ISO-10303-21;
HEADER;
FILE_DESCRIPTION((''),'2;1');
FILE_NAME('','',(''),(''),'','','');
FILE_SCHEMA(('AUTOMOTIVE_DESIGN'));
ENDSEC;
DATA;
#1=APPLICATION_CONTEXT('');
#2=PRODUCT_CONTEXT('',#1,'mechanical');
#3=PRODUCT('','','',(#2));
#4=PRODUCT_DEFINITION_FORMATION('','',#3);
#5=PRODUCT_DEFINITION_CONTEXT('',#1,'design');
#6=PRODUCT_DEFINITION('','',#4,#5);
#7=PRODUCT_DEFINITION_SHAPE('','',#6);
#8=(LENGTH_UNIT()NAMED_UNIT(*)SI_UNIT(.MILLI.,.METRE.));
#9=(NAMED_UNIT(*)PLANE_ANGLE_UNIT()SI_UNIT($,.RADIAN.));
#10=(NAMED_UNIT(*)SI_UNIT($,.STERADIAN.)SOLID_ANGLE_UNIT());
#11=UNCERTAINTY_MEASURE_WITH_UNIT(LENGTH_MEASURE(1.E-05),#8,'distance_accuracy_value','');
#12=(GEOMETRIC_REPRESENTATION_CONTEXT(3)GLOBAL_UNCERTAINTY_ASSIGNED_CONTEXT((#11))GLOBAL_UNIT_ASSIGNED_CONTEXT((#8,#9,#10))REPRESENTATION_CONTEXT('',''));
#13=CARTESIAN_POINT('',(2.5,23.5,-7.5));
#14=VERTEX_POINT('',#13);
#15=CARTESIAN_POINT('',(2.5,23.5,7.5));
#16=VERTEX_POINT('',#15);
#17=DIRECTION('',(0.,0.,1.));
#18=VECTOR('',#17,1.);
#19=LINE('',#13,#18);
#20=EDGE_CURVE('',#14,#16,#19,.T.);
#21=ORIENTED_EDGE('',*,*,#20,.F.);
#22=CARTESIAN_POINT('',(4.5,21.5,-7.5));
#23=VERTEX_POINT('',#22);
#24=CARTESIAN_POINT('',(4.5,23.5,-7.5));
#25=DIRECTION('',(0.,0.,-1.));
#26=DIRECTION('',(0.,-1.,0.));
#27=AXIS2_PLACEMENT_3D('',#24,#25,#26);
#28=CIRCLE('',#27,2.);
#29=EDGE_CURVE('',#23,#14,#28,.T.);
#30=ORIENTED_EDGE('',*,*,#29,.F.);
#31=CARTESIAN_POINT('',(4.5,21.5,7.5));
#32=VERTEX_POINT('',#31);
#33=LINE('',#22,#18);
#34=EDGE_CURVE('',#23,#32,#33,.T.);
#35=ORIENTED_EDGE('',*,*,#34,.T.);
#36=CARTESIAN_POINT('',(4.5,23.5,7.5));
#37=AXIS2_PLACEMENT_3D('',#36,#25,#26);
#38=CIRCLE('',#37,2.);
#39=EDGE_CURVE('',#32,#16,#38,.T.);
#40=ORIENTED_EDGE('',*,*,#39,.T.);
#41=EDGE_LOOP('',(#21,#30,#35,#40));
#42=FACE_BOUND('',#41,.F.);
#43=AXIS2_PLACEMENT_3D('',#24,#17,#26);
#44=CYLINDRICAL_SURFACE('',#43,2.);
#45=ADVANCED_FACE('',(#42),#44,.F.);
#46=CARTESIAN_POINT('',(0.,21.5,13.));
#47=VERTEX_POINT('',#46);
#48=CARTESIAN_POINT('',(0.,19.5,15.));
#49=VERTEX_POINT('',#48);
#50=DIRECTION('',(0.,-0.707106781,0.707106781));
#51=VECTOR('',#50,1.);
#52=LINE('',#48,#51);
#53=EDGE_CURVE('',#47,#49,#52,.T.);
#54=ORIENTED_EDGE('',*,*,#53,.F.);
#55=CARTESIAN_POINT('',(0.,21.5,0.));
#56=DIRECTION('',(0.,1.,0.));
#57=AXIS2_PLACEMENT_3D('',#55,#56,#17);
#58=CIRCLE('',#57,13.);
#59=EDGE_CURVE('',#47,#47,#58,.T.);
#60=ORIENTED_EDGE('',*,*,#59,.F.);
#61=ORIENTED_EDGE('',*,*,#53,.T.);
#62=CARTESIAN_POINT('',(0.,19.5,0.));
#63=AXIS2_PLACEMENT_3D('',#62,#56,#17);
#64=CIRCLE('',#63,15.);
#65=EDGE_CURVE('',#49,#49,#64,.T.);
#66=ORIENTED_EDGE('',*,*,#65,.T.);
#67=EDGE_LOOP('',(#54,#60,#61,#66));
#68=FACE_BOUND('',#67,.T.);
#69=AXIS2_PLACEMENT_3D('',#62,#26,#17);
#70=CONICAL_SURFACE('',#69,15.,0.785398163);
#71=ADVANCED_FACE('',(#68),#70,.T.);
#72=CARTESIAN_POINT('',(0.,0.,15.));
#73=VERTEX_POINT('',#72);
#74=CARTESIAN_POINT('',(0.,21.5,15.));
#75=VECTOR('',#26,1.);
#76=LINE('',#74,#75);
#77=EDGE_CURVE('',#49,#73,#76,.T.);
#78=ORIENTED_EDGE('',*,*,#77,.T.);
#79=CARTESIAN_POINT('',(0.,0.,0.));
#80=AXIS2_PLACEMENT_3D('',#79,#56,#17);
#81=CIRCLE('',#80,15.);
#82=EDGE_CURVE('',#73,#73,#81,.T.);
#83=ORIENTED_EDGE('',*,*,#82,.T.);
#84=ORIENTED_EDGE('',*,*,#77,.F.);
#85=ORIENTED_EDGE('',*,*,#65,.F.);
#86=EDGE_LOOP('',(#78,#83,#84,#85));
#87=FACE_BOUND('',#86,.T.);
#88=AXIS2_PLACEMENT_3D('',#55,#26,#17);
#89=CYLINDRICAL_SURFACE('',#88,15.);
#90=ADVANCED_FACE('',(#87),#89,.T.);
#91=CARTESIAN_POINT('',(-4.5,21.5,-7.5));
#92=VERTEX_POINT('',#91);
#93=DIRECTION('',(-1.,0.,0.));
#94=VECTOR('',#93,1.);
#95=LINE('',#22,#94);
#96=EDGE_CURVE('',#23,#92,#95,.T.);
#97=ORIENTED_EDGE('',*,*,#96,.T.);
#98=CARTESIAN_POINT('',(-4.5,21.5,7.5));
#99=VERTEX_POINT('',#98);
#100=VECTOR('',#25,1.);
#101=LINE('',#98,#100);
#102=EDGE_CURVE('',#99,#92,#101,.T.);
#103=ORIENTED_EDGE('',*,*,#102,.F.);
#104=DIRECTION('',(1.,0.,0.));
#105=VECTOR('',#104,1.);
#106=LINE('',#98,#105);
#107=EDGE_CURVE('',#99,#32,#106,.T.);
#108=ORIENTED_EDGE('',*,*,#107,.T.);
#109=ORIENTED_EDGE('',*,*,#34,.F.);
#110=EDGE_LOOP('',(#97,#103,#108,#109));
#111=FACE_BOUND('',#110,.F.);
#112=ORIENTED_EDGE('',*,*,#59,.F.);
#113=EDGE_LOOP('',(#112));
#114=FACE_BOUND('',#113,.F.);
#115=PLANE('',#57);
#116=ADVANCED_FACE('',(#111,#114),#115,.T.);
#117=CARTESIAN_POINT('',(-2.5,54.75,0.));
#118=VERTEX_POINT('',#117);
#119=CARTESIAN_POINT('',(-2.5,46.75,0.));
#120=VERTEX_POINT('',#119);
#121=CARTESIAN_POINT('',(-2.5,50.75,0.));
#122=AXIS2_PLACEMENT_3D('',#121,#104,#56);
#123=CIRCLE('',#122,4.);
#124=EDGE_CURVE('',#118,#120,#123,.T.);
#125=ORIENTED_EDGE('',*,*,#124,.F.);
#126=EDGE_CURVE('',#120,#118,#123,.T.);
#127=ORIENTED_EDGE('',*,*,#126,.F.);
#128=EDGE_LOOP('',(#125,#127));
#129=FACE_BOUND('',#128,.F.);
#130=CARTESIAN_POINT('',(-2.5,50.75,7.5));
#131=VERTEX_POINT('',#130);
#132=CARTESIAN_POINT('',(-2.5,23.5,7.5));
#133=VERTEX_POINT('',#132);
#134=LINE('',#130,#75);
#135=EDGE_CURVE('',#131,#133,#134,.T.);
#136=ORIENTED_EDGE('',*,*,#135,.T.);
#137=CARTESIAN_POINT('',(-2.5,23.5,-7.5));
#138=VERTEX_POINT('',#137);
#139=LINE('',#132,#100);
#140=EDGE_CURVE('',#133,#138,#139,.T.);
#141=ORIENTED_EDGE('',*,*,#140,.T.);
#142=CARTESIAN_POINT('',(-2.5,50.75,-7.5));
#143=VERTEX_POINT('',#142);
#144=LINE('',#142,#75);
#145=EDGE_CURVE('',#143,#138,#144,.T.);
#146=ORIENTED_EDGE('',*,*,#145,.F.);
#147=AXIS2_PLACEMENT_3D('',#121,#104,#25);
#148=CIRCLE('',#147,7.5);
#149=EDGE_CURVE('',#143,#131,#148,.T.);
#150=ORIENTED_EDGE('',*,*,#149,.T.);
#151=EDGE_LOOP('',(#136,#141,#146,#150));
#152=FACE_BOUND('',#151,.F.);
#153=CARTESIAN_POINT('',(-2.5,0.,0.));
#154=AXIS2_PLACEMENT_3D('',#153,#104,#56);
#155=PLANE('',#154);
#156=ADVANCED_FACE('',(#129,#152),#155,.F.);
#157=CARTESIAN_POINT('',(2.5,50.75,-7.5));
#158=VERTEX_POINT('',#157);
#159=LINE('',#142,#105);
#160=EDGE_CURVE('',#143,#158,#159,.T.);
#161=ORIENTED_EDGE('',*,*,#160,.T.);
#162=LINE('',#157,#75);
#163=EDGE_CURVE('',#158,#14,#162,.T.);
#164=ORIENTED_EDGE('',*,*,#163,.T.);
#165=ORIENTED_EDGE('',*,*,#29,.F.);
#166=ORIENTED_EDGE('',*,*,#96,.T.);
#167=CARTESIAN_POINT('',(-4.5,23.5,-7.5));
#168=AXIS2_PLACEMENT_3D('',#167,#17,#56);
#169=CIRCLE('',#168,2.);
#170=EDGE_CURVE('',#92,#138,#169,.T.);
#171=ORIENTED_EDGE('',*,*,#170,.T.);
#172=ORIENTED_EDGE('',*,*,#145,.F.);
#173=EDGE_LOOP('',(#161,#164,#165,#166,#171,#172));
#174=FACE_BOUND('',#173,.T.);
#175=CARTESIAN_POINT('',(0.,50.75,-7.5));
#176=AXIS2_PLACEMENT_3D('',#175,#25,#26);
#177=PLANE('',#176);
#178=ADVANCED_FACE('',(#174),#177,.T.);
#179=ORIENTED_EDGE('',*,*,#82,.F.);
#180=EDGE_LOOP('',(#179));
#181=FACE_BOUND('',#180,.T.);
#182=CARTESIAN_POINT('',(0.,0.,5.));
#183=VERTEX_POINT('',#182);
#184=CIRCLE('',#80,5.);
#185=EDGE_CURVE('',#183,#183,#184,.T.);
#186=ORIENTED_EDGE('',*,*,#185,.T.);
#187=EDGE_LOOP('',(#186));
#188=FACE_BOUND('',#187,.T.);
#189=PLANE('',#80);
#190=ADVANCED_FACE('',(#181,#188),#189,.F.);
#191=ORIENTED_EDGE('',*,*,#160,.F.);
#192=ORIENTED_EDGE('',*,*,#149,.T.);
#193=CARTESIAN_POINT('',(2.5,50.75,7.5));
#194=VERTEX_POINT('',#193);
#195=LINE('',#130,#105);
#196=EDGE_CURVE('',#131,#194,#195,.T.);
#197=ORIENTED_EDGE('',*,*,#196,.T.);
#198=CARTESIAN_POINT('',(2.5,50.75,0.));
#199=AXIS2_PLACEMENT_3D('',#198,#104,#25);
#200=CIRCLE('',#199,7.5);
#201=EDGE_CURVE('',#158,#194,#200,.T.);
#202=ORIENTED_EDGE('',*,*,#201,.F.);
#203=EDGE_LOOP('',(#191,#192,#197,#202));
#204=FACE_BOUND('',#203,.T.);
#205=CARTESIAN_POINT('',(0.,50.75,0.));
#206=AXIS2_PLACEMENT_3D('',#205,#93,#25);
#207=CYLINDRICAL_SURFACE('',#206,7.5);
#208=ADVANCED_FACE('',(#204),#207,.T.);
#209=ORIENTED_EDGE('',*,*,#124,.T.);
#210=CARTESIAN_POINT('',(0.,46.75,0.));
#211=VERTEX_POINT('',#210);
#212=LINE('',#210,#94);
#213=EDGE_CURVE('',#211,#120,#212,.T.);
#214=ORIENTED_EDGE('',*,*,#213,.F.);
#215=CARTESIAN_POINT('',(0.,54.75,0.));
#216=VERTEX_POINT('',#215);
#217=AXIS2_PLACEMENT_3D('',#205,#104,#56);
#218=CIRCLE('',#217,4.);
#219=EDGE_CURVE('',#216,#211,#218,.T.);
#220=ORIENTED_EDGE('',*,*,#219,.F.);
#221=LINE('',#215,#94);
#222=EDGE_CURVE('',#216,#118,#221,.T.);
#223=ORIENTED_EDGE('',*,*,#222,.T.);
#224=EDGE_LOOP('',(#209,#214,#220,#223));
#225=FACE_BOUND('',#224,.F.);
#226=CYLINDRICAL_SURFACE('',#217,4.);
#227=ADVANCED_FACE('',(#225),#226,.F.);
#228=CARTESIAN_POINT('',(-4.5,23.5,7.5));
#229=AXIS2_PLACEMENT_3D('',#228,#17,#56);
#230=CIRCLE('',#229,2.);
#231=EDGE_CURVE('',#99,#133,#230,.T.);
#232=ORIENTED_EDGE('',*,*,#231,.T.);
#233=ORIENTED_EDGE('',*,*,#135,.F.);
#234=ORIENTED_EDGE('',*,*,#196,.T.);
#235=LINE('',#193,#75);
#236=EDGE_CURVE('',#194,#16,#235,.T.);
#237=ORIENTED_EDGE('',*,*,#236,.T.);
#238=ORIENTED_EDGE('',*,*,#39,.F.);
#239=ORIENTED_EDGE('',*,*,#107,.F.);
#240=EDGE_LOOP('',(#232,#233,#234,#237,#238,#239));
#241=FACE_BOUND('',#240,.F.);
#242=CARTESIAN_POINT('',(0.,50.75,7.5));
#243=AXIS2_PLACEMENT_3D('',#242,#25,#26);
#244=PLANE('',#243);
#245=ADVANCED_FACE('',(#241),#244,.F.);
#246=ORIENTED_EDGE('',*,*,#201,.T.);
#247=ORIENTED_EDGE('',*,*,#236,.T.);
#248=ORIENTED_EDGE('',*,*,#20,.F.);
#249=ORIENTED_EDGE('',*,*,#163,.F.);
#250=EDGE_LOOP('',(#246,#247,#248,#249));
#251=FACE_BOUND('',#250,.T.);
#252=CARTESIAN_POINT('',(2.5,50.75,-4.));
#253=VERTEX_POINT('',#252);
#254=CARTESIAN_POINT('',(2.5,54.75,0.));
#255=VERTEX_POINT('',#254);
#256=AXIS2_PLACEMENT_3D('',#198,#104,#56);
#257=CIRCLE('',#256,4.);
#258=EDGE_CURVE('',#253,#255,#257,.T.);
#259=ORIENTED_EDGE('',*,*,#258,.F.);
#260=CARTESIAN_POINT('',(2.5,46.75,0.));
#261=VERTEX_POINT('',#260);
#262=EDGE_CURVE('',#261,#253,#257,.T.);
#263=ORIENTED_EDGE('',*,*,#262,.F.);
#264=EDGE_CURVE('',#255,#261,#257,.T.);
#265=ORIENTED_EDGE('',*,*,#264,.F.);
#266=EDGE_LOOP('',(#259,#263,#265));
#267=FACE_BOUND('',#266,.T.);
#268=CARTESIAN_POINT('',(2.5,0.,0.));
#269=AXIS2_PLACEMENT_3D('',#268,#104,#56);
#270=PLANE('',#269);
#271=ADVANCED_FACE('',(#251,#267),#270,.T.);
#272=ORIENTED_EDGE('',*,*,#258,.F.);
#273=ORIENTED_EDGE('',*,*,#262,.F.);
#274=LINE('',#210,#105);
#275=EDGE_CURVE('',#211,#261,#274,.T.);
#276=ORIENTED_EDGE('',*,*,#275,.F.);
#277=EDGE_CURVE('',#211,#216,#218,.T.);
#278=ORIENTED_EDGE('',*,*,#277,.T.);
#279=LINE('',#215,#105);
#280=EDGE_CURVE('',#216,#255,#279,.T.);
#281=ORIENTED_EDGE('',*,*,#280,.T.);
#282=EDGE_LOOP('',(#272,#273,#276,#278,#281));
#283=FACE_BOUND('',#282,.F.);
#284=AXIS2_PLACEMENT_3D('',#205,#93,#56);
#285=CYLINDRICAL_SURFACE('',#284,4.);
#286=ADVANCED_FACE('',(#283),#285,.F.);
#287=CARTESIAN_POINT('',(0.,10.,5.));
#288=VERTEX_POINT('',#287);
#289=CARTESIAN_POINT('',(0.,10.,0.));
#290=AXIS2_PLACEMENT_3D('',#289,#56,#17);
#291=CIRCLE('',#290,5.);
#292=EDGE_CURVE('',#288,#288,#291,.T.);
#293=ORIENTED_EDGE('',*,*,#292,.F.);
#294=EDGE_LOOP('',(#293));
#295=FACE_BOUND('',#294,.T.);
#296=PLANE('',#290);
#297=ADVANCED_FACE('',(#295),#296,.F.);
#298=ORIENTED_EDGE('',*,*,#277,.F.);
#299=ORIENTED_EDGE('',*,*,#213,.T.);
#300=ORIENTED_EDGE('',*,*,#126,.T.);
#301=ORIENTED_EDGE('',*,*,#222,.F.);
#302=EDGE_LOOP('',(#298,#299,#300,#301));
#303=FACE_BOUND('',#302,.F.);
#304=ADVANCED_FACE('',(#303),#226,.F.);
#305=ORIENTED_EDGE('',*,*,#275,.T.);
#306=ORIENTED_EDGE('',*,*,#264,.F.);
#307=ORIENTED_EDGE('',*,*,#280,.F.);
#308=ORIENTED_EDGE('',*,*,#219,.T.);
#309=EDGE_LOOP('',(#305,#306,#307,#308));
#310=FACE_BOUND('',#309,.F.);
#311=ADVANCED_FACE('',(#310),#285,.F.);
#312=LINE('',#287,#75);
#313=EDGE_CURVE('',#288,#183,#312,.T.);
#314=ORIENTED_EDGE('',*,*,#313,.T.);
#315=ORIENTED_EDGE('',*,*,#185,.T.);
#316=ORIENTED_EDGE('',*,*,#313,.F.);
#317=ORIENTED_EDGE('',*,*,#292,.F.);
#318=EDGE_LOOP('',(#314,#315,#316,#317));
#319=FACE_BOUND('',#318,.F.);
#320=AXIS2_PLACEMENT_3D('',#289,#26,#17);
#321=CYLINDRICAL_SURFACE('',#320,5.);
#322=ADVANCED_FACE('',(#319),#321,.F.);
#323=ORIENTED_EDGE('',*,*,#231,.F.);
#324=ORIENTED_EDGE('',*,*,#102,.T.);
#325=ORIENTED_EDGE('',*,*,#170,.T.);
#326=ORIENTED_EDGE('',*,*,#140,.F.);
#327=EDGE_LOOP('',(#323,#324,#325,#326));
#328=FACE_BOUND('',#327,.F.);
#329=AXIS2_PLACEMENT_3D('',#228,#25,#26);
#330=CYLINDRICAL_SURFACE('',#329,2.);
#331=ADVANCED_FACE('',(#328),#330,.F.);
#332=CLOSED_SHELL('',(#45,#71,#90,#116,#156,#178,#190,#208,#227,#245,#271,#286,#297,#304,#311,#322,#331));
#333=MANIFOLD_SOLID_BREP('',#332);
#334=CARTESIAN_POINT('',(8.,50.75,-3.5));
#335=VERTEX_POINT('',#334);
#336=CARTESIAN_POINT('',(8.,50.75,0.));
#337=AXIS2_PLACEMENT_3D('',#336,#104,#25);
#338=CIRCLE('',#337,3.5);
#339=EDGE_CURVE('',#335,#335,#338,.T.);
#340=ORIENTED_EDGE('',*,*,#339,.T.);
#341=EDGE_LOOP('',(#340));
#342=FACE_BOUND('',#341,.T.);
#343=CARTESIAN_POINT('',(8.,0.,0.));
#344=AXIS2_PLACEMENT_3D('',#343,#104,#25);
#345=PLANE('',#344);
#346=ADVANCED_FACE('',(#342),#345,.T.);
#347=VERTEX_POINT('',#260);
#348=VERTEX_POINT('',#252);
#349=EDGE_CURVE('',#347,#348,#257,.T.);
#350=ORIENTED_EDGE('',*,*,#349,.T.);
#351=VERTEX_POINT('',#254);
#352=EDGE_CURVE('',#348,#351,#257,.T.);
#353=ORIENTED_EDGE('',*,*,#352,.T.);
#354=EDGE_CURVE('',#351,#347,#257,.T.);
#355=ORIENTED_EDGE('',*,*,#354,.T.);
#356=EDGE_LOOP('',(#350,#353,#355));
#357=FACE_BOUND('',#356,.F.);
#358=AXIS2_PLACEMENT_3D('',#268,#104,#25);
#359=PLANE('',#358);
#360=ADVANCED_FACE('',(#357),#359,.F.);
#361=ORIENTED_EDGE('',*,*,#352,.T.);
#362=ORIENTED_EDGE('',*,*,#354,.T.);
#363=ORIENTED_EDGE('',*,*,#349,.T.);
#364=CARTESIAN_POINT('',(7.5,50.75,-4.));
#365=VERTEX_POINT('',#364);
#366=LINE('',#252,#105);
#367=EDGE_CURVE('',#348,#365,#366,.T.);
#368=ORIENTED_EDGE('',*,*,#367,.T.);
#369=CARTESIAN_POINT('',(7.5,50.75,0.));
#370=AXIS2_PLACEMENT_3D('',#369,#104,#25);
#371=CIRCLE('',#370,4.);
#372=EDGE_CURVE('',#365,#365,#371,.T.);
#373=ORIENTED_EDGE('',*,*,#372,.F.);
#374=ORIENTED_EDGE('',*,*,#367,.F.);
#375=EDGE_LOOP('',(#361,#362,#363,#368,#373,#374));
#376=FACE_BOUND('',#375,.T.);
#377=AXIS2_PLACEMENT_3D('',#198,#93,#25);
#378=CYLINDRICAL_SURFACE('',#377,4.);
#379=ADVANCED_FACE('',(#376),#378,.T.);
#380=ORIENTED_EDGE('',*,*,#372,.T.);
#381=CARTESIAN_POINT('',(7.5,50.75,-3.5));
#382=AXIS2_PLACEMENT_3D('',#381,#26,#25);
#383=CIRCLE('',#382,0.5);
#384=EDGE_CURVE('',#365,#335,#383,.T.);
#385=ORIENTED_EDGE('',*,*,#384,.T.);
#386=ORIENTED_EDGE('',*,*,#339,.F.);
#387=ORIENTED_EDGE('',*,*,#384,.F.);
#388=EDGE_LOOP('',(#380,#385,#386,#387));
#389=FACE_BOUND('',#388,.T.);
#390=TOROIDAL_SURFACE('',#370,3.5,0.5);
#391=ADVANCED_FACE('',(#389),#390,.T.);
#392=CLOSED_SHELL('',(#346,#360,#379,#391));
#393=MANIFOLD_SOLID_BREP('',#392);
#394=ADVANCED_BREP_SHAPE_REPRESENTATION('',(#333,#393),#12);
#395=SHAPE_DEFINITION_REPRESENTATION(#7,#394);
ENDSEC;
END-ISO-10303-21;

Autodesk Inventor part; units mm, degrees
ref_plane "YZ Plane" through (0, 0, 0) normal (1, 0, 0) x (0, 1, 0)
ref_plane "XZ Plane" through (0, 0, 0) normal (0, 1, 0) x (-1, 0, 0)
ref_plane "XY Plane" through (0, 0, 0) normal (0, 0, 1) x (1, 0, 0)
sketch "Esboço1" plane through (0, 0, 0) normal (1, 0, 0) x (0, 1, 0)
  line L0 (0, 5) -> (10, 5)
  line L1 (10, 5) -> (10, -5)
  line L2 (10, -5) -> (0, -5)
  line L3 (0, 5) -> (0, 15)
  line L4 (0, -5) -> (0, -15)
  line L5 (0, 15) -> (21.5, 15)
  line L6 (21.5, 15) -> (21.5, -15)
  line L7 (21.5, -15) -> (0, -15)
  line L8 (0, 0) -> (50.75, 0)
  point P0 (21.5, 0)
  point P1 (10, 0)
  dimension "d8" = 50.75
revolve "Revolução1" add sketch "Esboço1" angle 360 mid plane about axis through (0, 0, 0) along (0, 1, 0) contours L8 L6 L7 L4 L2 L1
chamfer "Chanfro1" distance 2 angle 45 1 edges at (0, 21.5, -15) measured on face at (-1.207, 7.1667, 14.9514)
sketch "Esboço2" plane through (0, 0, 0) normal (1, 0, 0) x (0, 1, 0)
  line L0 (0, 0) -> (50.75, 0)
  circle A0 centre (50.75, 0) radius 4
  arc A1 (50.75, -7.5) -> (50.75, 7.5) centre (50.75, 0) ccw
  line L1 (50.75, 7.5) -> (21.5, 7.5)
  line L2 (50.75, -7.5) -> (21.5, -7.5)
  line L3 (21.5, 7.5) -> (21.5, -7.5)
  line L4 (21.5, 13) -> (21.5, -13) projected
extrude "Extrusão1" add sketch "Esboço2" along normal mid plane 5
fillet "Arredondamento1" radius 2 2 edges at (2.5, 21.5, 0) (-2.5, 21.5, 0)
sketch "Esboço3" plane through (2.5, 0, 0) normal (1, 0, 0) x (0, 0, -1)
  circle A0 centre (0, 50.75) radius 4 projected
  circle A1 centre (0, 50.75) radius 4
  point P0 (0, 0)
  dimension "d19" = 8
extrude "Extrusão2" add sketch "Esboço3" along normal blind 5.5
fillet "Arredondamento2" radius 0.5 1 edges at (8, 50.75, 4)
